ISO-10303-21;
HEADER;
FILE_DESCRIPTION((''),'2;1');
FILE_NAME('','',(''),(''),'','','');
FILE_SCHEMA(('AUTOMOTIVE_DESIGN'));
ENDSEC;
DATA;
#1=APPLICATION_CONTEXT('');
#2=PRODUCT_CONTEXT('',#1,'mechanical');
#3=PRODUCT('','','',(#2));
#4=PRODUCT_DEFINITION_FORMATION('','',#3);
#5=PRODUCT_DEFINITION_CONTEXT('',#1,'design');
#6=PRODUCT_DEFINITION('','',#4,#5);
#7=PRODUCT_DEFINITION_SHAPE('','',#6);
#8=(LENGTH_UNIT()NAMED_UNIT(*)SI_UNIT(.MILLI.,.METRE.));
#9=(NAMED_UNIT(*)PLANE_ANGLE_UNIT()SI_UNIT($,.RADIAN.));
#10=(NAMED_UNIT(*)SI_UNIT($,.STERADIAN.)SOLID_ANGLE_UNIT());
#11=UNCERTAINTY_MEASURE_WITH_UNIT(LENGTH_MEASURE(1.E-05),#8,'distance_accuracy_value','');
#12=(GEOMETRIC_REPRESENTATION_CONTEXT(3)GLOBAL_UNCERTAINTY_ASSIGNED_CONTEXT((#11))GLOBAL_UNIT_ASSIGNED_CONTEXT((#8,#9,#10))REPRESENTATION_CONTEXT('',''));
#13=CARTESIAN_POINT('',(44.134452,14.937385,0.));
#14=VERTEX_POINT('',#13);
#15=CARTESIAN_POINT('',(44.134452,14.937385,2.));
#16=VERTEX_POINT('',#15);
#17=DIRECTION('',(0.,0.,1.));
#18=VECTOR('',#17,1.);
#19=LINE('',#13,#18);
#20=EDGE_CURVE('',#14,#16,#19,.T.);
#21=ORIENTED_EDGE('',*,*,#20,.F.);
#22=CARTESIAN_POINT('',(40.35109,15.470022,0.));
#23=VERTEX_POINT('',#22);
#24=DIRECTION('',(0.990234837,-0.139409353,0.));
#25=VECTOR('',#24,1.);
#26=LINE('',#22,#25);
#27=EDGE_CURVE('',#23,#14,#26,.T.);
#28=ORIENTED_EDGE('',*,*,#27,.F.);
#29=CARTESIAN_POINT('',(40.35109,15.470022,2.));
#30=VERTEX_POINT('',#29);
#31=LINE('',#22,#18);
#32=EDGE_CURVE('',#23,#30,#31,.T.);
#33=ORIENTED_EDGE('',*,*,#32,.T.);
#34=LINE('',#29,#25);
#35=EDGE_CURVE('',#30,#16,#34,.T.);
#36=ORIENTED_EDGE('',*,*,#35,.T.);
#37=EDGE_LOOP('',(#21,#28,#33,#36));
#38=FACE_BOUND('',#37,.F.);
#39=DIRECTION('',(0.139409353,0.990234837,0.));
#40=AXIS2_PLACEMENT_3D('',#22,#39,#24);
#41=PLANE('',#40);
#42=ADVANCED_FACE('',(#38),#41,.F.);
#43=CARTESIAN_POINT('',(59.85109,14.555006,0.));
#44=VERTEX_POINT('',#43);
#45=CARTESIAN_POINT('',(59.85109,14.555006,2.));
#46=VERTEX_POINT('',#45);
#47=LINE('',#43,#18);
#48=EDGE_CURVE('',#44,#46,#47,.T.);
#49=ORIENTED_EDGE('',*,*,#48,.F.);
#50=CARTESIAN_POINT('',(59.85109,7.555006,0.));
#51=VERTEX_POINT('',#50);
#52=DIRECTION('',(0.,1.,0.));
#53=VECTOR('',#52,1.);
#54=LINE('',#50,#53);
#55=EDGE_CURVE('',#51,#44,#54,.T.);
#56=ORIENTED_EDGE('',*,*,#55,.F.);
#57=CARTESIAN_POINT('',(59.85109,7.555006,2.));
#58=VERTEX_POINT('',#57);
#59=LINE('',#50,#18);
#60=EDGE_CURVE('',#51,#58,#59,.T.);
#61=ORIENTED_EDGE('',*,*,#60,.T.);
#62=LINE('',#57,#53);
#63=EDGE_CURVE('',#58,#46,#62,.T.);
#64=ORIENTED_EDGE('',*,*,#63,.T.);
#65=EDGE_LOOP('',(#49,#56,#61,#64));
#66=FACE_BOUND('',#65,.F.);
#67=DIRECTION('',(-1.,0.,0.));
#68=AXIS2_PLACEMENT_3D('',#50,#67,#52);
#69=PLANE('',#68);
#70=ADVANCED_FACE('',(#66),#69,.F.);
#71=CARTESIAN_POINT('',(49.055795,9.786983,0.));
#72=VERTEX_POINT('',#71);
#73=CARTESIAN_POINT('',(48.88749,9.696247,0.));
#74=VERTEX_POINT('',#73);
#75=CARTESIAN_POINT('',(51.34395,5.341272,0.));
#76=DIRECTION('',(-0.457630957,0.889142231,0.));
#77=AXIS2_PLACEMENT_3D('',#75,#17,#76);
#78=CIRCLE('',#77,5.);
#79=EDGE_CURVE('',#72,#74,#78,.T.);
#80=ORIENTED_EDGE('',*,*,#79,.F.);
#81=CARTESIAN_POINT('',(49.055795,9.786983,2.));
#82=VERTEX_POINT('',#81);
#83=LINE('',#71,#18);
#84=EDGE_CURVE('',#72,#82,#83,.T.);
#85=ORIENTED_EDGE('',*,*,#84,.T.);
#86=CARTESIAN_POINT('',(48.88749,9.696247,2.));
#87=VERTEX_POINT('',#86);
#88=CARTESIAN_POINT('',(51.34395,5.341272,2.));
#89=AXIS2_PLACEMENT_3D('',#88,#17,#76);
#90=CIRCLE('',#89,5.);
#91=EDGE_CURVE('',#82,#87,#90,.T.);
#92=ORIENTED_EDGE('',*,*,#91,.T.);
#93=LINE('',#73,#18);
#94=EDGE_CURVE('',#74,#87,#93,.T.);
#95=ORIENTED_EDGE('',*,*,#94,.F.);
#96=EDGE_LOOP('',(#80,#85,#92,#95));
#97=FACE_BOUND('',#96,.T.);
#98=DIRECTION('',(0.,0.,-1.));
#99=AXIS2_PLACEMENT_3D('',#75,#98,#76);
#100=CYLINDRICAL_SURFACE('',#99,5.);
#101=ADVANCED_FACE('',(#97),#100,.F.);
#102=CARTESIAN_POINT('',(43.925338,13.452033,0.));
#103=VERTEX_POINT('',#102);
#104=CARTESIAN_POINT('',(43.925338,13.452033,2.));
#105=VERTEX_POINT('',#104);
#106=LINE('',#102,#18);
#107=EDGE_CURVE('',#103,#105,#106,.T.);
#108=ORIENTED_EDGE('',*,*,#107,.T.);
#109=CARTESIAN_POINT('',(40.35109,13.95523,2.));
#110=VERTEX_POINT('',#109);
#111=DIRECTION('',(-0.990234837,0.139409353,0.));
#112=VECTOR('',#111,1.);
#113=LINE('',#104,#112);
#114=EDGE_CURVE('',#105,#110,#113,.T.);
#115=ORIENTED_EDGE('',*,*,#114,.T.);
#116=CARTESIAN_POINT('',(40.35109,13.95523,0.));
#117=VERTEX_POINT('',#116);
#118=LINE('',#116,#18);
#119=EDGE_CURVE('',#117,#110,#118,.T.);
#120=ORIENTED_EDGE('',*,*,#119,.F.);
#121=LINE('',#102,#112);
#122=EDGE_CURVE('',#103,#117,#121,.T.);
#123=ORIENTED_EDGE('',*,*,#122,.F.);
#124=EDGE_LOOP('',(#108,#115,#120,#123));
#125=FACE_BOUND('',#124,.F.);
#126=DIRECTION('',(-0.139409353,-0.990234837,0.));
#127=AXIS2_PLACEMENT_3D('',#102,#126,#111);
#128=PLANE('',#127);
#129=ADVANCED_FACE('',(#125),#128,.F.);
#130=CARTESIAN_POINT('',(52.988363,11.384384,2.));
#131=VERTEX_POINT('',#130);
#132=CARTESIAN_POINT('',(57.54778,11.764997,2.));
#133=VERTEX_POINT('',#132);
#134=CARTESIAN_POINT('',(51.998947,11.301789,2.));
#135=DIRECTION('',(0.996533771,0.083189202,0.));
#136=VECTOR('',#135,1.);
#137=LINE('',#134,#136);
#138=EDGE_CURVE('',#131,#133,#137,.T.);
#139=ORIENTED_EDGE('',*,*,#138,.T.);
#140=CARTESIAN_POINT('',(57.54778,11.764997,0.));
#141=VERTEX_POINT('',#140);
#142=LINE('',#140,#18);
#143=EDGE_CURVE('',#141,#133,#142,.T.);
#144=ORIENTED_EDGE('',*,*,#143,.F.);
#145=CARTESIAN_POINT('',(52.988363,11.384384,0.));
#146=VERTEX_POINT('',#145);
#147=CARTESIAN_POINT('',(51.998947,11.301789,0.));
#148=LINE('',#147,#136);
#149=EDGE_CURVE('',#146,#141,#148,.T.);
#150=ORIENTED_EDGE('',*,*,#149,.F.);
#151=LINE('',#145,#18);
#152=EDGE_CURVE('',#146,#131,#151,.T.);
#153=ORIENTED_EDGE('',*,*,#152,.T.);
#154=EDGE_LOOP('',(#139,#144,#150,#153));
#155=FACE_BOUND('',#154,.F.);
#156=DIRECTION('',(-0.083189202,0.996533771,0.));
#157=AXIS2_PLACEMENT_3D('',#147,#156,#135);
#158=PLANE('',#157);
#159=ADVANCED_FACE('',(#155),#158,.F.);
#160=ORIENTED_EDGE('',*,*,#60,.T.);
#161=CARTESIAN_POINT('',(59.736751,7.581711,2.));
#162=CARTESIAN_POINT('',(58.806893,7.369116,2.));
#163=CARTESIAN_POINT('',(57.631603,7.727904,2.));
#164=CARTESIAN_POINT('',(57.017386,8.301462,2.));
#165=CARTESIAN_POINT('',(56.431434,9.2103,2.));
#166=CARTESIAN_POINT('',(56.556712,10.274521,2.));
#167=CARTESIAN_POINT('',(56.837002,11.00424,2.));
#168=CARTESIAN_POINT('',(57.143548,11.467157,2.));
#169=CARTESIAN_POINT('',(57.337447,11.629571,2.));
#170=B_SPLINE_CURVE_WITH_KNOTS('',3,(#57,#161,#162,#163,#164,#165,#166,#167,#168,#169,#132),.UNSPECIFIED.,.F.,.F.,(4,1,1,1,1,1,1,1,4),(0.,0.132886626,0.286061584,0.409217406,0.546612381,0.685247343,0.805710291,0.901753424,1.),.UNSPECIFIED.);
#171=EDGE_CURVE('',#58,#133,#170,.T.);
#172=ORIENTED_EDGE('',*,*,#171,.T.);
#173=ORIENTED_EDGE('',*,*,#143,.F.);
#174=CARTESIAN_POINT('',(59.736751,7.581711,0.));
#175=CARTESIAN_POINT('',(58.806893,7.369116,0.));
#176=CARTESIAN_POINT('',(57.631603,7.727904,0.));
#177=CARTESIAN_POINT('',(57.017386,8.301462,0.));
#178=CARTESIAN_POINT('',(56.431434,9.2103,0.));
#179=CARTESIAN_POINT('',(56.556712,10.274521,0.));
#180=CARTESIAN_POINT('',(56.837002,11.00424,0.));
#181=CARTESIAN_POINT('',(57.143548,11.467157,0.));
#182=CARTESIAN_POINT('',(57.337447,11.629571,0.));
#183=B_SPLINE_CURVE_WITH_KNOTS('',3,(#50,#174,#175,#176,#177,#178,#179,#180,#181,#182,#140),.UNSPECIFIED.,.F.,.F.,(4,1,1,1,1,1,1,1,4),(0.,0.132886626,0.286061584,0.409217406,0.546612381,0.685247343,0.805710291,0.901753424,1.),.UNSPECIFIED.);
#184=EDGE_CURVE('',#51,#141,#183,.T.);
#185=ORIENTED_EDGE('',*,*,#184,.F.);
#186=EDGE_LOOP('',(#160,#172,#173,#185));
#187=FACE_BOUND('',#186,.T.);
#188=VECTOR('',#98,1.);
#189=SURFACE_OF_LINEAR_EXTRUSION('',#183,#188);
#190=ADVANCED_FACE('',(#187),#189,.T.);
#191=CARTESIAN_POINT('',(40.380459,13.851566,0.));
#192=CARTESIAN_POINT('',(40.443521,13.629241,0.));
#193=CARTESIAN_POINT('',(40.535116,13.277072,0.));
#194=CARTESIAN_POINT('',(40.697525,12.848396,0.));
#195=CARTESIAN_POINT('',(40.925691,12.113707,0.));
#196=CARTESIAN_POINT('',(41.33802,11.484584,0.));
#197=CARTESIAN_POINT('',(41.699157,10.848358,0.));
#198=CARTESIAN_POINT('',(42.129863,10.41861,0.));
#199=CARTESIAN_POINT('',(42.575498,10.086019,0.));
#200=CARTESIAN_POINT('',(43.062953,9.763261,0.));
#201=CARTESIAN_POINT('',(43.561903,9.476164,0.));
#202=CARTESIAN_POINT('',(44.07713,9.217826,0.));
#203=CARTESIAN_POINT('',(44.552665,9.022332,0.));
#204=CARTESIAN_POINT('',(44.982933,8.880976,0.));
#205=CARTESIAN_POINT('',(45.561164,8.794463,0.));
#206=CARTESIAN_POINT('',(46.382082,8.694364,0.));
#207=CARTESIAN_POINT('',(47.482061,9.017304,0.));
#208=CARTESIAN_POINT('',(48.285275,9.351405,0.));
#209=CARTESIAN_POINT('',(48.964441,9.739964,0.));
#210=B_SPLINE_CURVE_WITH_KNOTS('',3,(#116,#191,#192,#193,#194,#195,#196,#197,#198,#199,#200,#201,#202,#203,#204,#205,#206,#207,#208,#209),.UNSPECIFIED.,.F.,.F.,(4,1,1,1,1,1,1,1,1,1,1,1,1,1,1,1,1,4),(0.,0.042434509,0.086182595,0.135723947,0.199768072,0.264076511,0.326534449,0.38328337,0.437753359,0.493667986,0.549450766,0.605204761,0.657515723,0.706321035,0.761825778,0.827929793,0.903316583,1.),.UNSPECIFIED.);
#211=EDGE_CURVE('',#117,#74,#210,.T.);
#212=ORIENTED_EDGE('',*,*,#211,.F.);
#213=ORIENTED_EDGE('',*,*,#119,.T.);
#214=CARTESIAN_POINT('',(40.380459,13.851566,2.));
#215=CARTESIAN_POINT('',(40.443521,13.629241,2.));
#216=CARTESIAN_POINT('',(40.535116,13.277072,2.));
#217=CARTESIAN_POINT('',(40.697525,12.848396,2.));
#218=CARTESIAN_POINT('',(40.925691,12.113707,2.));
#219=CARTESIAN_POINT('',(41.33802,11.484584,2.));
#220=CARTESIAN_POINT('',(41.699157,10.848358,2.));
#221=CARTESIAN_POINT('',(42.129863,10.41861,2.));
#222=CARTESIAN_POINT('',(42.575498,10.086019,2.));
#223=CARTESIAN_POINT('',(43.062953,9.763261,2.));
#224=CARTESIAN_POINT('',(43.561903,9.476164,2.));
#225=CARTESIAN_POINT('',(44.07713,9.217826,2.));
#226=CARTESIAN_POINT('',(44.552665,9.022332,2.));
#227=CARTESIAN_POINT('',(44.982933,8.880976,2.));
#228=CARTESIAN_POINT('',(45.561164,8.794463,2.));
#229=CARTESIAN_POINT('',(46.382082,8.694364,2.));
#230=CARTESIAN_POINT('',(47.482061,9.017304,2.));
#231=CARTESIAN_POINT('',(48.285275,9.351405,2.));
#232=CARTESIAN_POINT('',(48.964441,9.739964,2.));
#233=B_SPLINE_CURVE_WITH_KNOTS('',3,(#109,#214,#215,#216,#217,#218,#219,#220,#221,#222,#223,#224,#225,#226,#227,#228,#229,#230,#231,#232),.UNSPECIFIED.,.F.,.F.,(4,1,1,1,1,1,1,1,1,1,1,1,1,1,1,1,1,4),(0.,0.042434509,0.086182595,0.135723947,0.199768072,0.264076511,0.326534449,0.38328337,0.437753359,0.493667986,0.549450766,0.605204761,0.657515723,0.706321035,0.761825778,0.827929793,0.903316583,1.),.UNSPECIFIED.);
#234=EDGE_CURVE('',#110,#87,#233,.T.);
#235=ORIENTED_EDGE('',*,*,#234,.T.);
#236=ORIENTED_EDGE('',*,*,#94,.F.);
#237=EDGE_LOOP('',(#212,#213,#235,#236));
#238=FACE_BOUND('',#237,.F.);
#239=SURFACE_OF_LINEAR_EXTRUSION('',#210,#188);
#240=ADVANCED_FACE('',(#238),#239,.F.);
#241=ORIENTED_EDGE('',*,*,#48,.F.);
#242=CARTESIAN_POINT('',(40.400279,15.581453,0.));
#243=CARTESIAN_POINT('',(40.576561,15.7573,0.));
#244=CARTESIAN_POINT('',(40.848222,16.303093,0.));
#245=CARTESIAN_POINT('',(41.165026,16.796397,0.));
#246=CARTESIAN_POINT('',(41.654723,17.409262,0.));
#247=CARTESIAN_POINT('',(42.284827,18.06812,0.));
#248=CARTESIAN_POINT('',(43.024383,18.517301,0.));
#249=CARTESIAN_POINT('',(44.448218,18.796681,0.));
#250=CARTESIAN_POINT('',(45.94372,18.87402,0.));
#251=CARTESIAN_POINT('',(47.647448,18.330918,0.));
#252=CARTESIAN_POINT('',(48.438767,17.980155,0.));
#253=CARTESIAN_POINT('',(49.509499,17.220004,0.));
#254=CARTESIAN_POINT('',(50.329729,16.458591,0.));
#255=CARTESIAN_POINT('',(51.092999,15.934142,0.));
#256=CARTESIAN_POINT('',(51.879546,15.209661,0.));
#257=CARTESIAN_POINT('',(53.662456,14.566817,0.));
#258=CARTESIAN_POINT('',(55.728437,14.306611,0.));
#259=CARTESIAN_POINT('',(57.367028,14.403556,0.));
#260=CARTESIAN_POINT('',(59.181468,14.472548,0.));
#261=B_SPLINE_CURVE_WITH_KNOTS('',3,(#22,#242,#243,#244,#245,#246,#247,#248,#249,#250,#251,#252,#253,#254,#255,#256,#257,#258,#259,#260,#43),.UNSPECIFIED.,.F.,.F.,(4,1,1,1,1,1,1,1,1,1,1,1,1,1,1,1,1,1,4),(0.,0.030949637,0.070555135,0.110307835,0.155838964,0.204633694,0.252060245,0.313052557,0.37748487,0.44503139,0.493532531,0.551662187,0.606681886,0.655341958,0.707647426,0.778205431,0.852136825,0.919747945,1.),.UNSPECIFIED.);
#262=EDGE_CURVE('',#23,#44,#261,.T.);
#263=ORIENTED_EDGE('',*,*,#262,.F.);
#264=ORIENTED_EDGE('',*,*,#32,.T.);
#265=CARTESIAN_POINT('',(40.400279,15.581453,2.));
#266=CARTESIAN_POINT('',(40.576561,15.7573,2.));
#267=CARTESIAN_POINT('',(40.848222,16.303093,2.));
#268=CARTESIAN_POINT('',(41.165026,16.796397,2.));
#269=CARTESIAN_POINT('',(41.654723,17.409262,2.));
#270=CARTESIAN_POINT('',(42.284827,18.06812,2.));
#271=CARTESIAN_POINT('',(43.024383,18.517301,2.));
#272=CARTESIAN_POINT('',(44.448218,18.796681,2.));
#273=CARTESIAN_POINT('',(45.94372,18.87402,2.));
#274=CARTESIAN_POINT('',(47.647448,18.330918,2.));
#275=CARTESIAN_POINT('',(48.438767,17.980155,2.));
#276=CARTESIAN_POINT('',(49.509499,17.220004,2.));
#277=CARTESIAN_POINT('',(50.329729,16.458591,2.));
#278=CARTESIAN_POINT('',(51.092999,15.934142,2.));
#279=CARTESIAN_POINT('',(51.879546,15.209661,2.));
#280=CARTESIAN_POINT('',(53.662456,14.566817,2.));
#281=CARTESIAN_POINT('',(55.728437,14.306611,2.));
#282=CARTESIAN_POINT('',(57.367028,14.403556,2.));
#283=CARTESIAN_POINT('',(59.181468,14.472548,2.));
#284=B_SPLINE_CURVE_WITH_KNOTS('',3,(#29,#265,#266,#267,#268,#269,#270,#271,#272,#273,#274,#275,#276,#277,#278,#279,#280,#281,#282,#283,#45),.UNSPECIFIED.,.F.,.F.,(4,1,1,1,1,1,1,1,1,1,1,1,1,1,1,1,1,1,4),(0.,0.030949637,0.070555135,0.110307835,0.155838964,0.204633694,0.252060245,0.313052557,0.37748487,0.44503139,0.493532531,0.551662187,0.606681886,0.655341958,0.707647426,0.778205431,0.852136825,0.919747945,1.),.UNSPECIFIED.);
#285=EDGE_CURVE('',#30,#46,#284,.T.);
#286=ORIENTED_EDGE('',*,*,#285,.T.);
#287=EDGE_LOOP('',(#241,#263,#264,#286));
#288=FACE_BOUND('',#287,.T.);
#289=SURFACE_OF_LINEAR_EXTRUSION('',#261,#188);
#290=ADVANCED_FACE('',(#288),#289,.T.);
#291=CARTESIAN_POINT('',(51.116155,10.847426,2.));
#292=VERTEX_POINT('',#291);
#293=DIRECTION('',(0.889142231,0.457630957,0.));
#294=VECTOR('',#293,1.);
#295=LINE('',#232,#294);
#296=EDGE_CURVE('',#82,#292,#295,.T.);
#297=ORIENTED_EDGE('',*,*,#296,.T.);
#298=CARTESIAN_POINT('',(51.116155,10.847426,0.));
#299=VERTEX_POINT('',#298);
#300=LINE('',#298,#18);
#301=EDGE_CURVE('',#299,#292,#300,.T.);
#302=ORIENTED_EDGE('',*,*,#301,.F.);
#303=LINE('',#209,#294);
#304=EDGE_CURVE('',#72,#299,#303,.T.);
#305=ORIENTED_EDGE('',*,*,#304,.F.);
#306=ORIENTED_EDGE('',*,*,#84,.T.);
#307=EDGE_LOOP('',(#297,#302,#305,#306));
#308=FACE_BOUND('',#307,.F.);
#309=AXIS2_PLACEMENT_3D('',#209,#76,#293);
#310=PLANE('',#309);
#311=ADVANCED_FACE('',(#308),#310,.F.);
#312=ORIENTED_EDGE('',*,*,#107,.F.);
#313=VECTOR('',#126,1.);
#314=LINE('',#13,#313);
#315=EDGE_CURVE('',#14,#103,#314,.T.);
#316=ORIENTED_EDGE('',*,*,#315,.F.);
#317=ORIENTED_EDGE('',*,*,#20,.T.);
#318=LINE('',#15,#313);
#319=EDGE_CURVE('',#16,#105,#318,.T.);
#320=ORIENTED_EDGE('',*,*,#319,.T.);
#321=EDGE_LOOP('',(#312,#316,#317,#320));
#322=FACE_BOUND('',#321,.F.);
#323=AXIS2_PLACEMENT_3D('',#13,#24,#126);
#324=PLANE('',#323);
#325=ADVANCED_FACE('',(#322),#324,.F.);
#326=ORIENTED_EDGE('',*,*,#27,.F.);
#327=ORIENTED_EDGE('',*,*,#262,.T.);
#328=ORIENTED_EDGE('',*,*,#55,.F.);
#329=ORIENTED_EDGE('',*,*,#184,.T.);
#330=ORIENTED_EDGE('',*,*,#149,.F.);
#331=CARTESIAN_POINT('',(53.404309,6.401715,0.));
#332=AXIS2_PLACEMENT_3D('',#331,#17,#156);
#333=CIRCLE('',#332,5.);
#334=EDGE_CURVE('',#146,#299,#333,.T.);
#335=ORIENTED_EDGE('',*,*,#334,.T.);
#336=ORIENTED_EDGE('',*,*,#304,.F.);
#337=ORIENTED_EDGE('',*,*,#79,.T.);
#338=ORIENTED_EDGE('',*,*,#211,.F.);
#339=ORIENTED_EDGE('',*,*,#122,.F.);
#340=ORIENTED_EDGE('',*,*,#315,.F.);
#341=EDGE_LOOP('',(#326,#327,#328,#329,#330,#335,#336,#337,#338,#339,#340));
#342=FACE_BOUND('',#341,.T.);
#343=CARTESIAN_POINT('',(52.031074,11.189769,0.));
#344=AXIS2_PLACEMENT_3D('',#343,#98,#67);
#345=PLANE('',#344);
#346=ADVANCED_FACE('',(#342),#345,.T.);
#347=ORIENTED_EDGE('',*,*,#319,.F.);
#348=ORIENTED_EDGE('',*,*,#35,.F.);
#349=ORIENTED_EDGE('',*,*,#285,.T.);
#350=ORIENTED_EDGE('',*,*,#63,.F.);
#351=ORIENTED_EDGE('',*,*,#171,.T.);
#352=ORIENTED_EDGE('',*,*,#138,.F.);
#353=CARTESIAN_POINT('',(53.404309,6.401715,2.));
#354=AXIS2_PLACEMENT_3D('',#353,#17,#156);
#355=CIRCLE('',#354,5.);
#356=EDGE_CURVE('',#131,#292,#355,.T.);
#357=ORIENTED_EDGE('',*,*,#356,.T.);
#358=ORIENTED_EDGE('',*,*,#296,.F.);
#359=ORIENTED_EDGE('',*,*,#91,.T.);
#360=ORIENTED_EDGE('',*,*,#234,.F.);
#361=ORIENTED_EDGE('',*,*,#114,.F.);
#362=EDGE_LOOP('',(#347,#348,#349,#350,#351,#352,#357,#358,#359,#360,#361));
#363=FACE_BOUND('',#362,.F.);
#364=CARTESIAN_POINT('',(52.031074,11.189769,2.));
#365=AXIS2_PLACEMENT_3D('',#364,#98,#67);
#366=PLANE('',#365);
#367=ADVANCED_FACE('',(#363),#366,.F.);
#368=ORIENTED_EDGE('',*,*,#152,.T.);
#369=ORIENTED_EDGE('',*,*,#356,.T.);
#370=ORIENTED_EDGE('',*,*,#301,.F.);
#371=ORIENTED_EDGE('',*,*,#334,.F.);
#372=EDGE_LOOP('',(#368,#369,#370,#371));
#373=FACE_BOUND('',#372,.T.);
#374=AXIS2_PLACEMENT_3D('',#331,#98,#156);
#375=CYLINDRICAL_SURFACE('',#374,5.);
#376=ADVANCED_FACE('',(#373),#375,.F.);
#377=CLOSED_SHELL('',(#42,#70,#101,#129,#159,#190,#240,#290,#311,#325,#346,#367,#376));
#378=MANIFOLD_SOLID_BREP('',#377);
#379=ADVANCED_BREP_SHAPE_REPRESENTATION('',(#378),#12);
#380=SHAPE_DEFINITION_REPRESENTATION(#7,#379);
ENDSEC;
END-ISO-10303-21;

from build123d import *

# Parameters (mm, degrees)
F1_DEPTH    = 2
F2_T1_DEPTH = 2


# Not quite as in the source:
# - a fillet or chamfer that OpenCascade refuses, or shapes differently, is made with other operations: its cross-section is extruded or revolved along the edge and cut away or added


with BuildPart() as f1:
    # F0 (on Top) → F1 (new body)
    with BuildSketch(Plane.XY):
        with BuildLine():
            add(Edge.make_bspline(
                [(40.3510897258, 15.4700221217), (40.4002790123, 15.5814527788), (40.5765609139, 15.7573002366), (40.8482218334, 16.3030928425), (41.165026275, 16.7963969786), (41.6547225339, 17.4092616999), (42.2848270806, 18.0681197149), (43.024383076, 18.5173006903), (44.4482177174, 18.7966814782), (45.9437204424, 18.8740196912), (47.6474480344, 18.3309181954), (48.4387671563, 17.9801551733), (49.509499414, 17.2200044537), (50.3297293975, 16.4585906766), (51.0929989178, 15.9341416913), (51.8795462786, 15.2096607451), (53.6624560336, 14.5668169621), (55.7284365284, 14.3066111603), (57.3670281795, 14.4035559525), (59.1814684115, 14.4725478471), (59.8510897258, 14.5550060059)],
                knots=[0, 0, 0, 0, 0.0309496374, 0.0705551354, 0.1103078346, 0.1558389635, 0.2046336941, 0.2520602452, 0.3130525572, 0.3774848703, 0.4450313899, 0.4935325314, 0.5516621873, 0.6066818861, 0.6553419578, 0.7076474259, 0.7782054312, 0.8521368249, 0.9197479448, 1, 1, 1, 1], degree=3))
            Line((40.3510897258, 15.4700221217), (44.1344518025, 14.9373847717))
            Line((44.1344518025, 14.9373847717), (43.9253377729, 13.4520325163))
            Line((43.9253377729, 13.4520325163), (40.3510897258, 13.9552299289))
            add(Edge.make_bspline(
                [(40.3510897258, 13.9552299289), (40.380459386, 13.8515658436), (40.4435205062, 13.6292409687), (40.5351157189, 13.2770722669), (40.6975247029, 12.8483958981), (40.9256908997, 12.1137067954), (41.3380196001, 11.4845841437), (41.6991570459, 10.8483582383), (42.1298627814, 10.4186096604), (42.5754983268, 10.0860188118), (43.0629528901, 9.7632613692), (43.5619025736, 9.4761638561), (44.0771300551, 9.2178264046), (44.5526645941, 9.0223320072), (44.9829333509, 8.8809763782), (45.5611643118, 8.794463186), (46.382082494, 8.6943641738), (47.4820612716, 9.0173037656), (48.2852752929, 9.3514047606), (48.9644408226, 9.7399642691)],
                knots=[0, 0, 0, 0, 0.0424345091, 0.0861825949, 0.1357239466, 0.1997680722, 0.264076511, 0.3265344491, 0.3832833697, 0.4377533585, 0.4936679865, 0.5494507655, 0.6052047608, 0.6575157225, 0.7063210351, 0.761825778, 0.8279297926, 0.9033165831, 1, 1, 1, 1], degree=3))
            Line((48.9644408226, 9.7399642691), (51.9989468157, 11.3017885014))
            Line((51.9989468157, 11.3017885014), (57.5477800182, 11.7649970946))
            add(Edge.make_bspline(
                [(59.8510897258, 7.5550060059), (59.7367509498, 7.5817109742), (58.8068931658, 7.3691162235), (57.6316029399, 7.7279038973), (57.0173857229, 8.3014615446), (56.4314344596, 9.210300185), (56.556712226, 10.2745206274), (56.8370016511, 11.0042399426), (57.1435482301, 11.4671570982), (57.3374471588, 11.6295714443), (57.5477800182, 11.7649970946)],
                knots=[0, 0, 0, 0, 0.1328866261, 0.2860615837, 0.4092174064, 0.5466123808, 0.6852473434, 0.8057102912, 0.9017534238, 1, 1, 1, 1], degree=3))
            Line((59.8510897258, 7.5550060059), (59.8510897258, 14.5550060059))
        make_face()
    extrude(amount=F1_DEPTH)

    # F2: fillet of radius 5 on 2 edges, made by hand

    # F2_s2 → F2_t1 (join)
    with BuildSketch(Plane.XY):
        with BuildLine():
            ThreePointArc((52.9883634864, 11.3843835782), (52.0258606682, 11.2079480539), (51.1161547101, 10.8474258784))
            Line((51.1161547101, 10.8474258784), (51.9989468157, 11.3017885014))
            Line((51.9989468157, 11.3017885014), (52.9883634864, 11.3843835782))
        make_face()
        with BuildLine():
            ThreePointArc((49.0557948641, 9.7869831104), (48.9712088199, 9.7424196411), (48.8874903164, 9.6962469887))
            ThreePointArc((48.8874903164, 9.6962469887), (48.9259988454, 9.7180470594), (48.9644408226, 9.7399642691))
            Line((48.9644408226, 9.7399642691), (49.0557948641, 9.7869831104))
        make_face()
    extrude(amount=F2_T1_DEPTH)


solid = f1.part
